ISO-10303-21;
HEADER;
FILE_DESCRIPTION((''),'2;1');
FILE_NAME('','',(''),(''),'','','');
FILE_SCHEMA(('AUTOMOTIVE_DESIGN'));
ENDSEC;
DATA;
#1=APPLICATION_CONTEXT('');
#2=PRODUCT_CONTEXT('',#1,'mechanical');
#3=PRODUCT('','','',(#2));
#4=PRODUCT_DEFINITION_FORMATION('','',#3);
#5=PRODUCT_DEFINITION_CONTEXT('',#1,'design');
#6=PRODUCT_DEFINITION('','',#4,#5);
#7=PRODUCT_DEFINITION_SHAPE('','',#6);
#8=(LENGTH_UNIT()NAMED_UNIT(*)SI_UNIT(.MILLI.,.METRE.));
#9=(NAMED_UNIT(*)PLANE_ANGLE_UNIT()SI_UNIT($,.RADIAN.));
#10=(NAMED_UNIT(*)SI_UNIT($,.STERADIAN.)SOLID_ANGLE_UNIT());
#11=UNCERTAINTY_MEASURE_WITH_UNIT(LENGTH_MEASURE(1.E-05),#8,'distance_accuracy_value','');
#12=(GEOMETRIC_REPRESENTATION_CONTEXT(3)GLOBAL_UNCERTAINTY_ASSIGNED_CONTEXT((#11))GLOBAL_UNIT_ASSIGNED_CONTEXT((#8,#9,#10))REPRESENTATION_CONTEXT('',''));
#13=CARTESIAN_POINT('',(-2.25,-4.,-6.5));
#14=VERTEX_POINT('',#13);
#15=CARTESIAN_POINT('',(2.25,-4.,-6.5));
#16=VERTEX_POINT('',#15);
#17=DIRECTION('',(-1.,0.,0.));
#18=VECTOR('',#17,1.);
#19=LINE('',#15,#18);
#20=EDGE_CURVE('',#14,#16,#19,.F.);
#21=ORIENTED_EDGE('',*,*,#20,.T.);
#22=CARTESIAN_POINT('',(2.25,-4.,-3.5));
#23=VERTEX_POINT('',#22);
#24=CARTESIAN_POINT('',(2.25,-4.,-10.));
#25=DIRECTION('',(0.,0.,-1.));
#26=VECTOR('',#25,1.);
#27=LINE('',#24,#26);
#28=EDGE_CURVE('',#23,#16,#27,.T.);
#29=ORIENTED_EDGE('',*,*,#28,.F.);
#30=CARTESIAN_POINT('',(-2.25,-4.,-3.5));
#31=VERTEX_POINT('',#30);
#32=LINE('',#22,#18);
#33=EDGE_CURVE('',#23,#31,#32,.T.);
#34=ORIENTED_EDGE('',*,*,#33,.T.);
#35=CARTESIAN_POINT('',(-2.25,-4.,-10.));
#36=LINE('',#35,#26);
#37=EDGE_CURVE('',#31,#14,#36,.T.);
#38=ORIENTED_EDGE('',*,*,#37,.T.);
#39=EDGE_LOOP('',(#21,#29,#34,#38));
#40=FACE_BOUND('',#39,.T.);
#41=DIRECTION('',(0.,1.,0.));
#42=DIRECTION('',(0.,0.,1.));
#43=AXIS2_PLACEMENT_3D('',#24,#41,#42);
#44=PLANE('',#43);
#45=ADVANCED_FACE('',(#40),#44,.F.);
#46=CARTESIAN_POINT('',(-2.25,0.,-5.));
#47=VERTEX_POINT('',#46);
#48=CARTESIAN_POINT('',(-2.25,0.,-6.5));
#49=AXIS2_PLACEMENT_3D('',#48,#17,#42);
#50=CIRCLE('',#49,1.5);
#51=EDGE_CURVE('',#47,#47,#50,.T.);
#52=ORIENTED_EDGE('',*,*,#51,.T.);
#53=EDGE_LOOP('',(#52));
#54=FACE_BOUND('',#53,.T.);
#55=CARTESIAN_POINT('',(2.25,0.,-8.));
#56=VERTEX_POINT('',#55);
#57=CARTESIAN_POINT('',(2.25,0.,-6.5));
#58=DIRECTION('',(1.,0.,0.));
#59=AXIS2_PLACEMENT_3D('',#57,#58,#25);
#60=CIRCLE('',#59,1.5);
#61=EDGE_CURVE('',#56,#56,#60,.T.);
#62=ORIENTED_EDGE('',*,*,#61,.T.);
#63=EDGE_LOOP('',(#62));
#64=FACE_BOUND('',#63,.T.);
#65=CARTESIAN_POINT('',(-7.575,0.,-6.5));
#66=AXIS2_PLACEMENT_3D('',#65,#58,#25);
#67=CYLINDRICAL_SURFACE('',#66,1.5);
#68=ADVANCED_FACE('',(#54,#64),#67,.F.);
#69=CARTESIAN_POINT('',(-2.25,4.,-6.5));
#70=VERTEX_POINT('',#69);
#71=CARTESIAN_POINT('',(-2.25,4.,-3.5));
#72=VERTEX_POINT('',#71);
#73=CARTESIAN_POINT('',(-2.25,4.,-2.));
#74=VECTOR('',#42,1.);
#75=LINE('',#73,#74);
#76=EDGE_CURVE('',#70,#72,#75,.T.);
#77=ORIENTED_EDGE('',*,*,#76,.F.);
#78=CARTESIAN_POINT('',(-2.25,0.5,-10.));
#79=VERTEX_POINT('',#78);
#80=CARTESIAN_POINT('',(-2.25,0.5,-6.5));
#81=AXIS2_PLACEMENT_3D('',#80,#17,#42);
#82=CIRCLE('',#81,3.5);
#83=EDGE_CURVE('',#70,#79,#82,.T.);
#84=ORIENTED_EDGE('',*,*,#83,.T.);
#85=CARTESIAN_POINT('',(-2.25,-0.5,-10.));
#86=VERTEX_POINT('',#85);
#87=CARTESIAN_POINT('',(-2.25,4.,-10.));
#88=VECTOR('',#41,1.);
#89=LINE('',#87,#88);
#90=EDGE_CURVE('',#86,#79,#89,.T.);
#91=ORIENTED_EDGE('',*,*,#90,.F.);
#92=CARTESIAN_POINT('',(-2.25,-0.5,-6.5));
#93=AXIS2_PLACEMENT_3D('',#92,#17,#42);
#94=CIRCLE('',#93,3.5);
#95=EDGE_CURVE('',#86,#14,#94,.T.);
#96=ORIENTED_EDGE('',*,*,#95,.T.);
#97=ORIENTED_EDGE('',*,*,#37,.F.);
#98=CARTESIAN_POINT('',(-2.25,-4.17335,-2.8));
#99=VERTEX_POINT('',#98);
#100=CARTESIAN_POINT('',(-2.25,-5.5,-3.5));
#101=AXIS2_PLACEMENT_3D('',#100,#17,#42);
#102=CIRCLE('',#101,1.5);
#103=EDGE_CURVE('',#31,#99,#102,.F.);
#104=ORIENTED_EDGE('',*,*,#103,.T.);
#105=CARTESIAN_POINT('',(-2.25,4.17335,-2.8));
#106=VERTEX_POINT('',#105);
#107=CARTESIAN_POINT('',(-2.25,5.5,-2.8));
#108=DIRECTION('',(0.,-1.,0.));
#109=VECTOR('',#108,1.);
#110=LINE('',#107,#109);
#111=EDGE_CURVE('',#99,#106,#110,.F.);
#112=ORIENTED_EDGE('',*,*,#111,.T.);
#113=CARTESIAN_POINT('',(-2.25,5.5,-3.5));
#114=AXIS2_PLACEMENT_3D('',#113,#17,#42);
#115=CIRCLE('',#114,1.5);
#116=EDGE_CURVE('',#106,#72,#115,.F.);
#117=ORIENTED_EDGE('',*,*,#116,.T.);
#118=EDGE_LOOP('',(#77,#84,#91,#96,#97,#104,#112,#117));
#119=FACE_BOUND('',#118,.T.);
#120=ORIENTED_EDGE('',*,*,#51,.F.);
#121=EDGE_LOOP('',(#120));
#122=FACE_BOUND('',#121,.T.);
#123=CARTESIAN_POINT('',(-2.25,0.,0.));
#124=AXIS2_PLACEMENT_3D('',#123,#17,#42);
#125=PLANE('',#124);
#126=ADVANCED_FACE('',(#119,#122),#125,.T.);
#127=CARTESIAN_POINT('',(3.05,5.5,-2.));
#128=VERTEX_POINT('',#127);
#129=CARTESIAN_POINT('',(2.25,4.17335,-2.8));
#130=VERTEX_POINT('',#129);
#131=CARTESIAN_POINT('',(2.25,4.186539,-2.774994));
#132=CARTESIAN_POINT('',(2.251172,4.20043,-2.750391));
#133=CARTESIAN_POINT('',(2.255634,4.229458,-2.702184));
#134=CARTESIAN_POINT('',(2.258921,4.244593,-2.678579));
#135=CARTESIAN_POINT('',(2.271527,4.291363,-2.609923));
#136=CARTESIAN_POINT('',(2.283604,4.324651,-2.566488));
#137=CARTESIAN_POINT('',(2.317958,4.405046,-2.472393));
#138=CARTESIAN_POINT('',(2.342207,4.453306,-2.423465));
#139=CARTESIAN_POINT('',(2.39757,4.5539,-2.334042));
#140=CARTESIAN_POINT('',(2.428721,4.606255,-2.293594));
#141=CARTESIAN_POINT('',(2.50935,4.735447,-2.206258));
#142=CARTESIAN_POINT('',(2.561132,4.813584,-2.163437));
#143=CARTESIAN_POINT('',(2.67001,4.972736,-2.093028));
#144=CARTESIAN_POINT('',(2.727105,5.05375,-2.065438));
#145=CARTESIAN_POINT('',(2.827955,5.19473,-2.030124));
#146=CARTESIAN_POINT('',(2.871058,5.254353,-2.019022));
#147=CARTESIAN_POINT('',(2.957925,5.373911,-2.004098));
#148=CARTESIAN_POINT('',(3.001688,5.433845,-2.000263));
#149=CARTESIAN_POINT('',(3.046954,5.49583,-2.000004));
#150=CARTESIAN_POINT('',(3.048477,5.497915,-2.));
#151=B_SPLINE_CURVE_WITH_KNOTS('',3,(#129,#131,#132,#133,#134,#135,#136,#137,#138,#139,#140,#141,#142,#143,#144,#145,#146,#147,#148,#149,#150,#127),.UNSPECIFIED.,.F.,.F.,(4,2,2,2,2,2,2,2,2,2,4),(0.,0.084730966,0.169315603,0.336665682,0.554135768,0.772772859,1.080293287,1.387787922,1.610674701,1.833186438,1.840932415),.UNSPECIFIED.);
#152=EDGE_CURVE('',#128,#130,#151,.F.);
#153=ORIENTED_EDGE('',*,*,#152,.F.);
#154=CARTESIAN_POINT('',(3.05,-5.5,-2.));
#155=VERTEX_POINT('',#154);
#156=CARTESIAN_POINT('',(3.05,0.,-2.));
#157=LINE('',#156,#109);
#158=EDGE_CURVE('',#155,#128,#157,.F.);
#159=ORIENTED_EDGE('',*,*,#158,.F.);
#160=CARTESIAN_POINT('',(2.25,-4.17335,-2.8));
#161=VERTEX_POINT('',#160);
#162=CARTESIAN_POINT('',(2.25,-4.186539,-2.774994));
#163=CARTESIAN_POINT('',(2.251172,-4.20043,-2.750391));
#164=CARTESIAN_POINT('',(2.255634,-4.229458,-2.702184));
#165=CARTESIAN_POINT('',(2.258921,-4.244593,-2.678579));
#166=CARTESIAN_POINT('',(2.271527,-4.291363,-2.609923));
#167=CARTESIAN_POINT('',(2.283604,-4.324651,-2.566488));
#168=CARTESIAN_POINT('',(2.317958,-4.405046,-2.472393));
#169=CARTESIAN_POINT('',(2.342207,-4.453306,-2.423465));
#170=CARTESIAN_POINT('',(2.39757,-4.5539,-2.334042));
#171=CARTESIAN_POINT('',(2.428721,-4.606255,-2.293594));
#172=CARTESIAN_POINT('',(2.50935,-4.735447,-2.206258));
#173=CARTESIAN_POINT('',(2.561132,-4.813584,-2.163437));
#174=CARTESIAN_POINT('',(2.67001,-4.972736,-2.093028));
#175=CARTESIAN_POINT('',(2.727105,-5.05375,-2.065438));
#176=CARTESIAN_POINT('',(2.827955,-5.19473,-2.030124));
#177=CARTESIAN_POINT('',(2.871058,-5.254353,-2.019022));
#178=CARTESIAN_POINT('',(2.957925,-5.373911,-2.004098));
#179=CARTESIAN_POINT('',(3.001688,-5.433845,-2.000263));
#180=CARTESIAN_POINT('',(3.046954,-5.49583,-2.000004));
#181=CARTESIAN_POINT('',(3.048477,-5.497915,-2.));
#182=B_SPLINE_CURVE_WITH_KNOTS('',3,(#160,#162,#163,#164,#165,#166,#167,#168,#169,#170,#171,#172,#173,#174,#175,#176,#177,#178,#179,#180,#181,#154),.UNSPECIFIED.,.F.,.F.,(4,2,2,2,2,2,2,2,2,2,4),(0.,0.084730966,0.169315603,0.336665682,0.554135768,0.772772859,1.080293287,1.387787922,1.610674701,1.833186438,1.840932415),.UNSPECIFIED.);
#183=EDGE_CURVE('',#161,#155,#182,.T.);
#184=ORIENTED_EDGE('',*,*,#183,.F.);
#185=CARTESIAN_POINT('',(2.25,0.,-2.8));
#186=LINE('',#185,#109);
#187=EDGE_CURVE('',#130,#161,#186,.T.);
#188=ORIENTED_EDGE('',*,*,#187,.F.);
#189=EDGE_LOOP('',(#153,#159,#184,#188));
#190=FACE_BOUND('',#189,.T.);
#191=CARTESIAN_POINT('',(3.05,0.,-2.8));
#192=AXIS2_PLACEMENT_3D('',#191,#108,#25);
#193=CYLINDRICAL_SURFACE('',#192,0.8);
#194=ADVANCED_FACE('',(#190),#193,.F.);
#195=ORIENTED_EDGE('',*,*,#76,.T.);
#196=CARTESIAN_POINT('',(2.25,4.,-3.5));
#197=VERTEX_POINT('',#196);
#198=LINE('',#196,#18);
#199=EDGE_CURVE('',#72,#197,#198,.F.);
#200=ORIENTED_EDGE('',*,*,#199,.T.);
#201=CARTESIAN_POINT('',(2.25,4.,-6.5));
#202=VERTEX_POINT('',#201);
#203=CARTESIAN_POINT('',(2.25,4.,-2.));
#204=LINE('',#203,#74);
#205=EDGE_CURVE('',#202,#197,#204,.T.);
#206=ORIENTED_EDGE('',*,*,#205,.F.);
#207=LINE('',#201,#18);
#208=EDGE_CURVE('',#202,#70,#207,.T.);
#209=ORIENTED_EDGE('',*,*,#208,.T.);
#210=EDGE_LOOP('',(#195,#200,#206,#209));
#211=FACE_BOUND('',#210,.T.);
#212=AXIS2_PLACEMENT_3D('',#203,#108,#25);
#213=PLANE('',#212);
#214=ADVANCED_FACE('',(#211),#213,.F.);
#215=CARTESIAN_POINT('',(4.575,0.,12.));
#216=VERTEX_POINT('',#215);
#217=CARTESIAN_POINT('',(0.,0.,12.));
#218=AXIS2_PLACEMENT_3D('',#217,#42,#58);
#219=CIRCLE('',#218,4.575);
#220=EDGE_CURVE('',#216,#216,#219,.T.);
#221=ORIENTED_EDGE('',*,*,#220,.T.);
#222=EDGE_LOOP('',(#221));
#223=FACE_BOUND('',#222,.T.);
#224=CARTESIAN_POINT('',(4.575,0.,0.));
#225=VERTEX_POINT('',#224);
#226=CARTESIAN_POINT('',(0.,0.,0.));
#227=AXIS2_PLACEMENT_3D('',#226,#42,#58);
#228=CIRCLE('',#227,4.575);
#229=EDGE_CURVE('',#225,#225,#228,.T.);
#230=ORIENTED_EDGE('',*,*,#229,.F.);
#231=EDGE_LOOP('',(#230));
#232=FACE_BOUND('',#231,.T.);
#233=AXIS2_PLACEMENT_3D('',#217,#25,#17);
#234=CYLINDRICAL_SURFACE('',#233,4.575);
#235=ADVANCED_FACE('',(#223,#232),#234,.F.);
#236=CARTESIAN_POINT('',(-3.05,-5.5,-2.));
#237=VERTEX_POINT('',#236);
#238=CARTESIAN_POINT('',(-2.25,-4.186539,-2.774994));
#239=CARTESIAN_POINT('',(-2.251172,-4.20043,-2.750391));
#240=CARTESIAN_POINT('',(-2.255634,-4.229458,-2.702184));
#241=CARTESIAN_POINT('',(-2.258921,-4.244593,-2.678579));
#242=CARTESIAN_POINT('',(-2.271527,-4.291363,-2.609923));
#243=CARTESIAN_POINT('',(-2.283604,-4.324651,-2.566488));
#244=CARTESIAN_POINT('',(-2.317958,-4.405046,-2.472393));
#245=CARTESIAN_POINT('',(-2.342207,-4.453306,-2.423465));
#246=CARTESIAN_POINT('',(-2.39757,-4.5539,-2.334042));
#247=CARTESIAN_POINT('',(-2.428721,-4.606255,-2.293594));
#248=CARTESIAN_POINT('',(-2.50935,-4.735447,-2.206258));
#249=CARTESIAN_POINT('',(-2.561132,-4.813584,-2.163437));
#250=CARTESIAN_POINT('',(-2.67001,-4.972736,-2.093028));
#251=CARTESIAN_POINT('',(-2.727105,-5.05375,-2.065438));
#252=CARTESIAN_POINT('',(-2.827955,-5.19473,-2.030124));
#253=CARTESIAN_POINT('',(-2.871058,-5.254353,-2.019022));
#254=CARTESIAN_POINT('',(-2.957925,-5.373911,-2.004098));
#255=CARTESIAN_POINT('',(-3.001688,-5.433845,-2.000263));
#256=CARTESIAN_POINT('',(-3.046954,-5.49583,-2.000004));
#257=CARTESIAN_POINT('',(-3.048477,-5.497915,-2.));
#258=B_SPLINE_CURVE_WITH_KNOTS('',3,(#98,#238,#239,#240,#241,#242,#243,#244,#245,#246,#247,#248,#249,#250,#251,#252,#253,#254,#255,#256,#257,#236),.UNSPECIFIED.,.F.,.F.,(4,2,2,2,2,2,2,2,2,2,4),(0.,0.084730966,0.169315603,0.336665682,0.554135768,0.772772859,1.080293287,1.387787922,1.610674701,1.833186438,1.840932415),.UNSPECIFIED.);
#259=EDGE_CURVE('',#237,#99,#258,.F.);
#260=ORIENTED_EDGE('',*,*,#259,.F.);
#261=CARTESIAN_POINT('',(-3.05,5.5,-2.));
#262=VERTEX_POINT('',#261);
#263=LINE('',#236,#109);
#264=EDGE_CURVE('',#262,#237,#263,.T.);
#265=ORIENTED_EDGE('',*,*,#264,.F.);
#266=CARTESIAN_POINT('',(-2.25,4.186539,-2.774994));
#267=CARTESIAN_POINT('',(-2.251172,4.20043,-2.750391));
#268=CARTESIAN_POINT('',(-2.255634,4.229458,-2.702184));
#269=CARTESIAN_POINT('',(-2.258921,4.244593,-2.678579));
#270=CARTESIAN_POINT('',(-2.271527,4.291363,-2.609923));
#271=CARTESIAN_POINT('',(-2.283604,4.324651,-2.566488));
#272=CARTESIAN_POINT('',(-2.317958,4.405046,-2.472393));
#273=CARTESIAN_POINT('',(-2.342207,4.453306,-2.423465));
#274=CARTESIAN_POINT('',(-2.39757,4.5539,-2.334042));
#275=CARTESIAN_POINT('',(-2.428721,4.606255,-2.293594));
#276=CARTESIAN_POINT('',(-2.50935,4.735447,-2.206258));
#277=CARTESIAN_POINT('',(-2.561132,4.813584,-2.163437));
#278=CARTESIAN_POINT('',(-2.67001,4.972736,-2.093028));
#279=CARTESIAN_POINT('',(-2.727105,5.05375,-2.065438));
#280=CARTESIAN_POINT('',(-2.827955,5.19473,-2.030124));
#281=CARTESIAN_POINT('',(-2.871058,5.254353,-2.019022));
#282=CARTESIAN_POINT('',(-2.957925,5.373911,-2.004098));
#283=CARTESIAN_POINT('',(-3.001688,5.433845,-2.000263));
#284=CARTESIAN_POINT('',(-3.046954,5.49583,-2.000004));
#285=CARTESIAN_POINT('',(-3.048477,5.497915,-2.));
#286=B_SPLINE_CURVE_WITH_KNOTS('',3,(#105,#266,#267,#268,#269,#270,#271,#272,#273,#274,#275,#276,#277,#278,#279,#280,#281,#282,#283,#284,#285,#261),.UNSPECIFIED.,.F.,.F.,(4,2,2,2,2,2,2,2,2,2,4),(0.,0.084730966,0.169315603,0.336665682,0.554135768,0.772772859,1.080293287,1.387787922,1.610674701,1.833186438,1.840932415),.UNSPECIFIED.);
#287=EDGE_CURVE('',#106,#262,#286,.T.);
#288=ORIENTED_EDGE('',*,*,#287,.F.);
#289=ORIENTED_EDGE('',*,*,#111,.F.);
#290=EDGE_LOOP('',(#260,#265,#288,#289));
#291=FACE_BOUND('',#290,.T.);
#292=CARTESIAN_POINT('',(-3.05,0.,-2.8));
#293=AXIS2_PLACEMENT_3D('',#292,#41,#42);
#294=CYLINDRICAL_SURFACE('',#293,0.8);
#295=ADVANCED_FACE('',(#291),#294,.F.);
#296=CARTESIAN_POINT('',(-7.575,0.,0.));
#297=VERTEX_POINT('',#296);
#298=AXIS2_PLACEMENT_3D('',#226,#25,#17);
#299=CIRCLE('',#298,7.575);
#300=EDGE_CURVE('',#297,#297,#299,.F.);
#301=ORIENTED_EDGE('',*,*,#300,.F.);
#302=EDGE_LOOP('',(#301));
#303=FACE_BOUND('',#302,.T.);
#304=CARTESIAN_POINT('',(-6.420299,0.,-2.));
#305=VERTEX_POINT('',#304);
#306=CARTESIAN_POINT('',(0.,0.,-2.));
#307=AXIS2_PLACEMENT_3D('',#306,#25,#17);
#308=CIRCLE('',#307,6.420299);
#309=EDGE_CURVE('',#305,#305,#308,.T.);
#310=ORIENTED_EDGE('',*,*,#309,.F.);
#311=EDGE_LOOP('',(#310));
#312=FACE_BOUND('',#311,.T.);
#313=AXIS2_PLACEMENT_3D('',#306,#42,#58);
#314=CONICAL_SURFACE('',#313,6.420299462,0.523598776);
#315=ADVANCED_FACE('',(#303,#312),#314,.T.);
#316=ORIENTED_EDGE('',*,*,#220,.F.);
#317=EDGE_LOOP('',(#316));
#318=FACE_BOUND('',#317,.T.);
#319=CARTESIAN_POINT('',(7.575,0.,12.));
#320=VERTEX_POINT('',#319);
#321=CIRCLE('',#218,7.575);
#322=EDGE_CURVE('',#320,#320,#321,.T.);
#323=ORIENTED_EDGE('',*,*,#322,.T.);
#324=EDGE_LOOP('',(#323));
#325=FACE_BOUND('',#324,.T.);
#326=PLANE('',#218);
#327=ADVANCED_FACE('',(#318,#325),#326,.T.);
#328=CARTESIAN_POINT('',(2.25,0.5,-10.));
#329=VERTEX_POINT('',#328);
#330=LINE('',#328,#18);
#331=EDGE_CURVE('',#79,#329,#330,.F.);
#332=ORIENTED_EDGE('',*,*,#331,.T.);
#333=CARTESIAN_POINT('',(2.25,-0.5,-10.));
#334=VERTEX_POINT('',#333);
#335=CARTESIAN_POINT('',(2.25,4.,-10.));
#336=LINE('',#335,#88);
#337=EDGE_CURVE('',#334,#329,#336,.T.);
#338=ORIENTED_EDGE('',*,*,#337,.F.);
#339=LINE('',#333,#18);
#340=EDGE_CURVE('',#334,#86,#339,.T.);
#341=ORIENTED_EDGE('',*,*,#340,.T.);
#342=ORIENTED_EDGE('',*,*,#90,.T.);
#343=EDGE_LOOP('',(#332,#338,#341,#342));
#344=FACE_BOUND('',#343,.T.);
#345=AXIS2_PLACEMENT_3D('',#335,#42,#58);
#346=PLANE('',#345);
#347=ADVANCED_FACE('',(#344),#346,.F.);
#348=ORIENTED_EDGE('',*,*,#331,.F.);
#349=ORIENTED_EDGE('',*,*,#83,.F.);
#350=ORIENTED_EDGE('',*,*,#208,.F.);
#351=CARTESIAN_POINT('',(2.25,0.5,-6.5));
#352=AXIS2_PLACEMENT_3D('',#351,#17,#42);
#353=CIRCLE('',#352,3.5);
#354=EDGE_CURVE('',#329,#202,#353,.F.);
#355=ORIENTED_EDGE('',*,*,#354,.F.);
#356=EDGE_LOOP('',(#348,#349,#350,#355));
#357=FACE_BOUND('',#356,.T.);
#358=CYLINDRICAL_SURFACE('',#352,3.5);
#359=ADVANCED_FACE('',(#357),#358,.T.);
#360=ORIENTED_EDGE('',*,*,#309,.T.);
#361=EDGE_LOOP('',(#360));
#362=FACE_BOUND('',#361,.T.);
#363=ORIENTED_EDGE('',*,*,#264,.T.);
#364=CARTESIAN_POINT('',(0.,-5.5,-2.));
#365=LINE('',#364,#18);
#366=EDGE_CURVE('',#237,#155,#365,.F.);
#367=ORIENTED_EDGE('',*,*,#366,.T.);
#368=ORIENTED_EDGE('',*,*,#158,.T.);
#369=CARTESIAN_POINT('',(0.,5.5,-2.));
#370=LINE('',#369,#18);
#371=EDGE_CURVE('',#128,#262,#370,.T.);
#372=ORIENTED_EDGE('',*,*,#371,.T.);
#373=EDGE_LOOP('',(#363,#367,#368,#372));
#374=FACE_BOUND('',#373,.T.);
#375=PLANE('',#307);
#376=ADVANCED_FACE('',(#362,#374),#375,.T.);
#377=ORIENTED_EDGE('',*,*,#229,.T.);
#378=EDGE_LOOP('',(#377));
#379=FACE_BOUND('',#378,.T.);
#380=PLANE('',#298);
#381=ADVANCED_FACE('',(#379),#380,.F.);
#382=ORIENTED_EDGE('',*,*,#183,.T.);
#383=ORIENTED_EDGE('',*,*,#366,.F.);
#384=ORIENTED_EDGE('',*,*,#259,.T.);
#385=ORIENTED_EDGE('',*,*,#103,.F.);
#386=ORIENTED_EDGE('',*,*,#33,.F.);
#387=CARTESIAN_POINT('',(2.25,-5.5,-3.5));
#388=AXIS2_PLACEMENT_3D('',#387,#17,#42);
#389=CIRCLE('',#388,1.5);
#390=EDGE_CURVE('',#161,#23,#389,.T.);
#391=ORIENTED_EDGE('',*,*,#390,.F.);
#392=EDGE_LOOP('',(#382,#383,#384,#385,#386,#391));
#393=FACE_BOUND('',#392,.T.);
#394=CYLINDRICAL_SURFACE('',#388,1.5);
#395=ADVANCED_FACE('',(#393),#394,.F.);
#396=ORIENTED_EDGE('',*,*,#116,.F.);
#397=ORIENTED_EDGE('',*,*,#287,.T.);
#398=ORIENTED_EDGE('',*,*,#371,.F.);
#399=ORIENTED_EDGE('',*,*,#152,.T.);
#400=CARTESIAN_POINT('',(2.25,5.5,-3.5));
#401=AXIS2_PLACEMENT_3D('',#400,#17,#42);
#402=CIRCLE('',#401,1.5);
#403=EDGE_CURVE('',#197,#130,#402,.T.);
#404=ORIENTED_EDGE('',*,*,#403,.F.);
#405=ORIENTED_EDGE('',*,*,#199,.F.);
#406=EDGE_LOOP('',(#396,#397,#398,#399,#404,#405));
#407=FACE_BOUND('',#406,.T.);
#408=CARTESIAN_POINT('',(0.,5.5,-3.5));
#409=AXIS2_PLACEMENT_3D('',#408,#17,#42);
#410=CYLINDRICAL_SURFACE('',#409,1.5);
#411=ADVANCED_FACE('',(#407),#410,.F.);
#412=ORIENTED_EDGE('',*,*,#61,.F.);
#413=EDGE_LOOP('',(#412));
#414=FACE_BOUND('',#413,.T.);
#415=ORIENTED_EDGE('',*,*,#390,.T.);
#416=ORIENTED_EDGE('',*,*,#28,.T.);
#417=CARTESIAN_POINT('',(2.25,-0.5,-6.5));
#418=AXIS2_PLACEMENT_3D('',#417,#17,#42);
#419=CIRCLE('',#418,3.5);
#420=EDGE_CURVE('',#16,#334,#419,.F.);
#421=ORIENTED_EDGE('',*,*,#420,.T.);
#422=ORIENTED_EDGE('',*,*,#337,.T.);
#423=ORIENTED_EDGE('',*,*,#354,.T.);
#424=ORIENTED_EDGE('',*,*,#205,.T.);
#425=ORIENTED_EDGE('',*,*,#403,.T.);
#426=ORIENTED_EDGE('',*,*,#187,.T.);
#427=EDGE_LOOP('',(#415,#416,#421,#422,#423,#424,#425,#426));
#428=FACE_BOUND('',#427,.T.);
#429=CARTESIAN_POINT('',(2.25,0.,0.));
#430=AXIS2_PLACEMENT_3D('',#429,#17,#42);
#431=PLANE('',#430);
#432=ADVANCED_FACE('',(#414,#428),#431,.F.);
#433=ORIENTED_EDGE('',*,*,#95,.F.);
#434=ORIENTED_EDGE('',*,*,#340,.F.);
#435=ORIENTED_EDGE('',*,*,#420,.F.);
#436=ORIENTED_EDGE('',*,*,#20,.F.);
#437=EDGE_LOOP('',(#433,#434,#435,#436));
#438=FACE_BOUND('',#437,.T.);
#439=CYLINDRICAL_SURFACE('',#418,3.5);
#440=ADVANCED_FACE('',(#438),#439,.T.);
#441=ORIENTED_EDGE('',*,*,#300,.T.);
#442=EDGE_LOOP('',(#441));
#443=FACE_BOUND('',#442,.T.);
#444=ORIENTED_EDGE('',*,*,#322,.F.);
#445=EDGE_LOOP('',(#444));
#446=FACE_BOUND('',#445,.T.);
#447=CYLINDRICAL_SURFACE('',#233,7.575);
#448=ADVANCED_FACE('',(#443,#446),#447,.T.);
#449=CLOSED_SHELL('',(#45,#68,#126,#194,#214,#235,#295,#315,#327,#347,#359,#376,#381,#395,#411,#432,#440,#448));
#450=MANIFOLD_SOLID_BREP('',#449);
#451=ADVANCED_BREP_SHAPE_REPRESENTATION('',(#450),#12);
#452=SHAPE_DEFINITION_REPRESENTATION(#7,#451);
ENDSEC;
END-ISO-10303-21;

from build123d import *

# Parameters (mm, degrees)
SKETCH1_R           = 7.575
SKETCH1_R_2         = 4.575
BOSS_EXTRUDE1_DEPTH = 12
BOSS_EXTRUDE2_START = 2
SKETCH2_R           = 7.575
BOSS_EXTRUDE2_DEPTH = 2
SKETCH4_W           = 8
SKETCH4_H           = 8
BOSS_EXTRUDE3_DEPTH = 2.25
SKETCH5_R           = 1.5
CUT_EXTRUDE1_DEPTH  = 18.260105735
FILLET1_R           = 3.5
FILLET2_R           = 1.5
FILLET3_R           = 0.8
CHAMFER1_SIZE2      = 2
CHAMFER1_SIZE       = 1.154700538


with BuildPart() as part:
    # Sketch1 → Boss-Extrude1 (new body)
    with BuildSketch(Plane.XY):
        Circle(SKETCH1_R)
        Circle(SKETCH1_R_2, mode=Mode.SUBTRACT)
    extrude(amount=BOSS_EXTRUDE1_DEPTH)

    # Sketch2 → Boss-Extrude2 (add)
    with BuildSketch(Plane(origin=(0, 0, 0), x_dir=(-1, 0, 0), z_dir=(0, 0, -1)).offset(BOSS_EXTRUDE2_START)):
        Circle(SKETCH2_R)
    extrude(amount=-BOSS_EXTRUDE2_DEPTH)

    # Sketch4 → Boss-Extrude3 (add, symmetric)
    with BuildSketch(Plane(origin=(0, 0, 0), x_dir=(0, 0, -1), z_dir=(1, 0, 0))):
        with Locations((6, 0)):
            Rectangle(SKETCH4_W, SKETCH4_H)
    extrude(amount=BOSS_EXTRUDE3_DEPTH, both=True)

    # Sketch5 → Cut-Extrude1 (cut, through all)
    with BuildSketch(Plane(origin=(2.25, 0, 0), x_dir=(0, 0, -1), z_dir=(1, 0, 0))):
        with Locations((6.5, 0)):
            Circle(SKETCH5_R)
    extrude(amount=-CUT_EXTRUDE1_DEPTH, mode=Mode.SUBTRACT)

    # Fillet1
    fillet1_edges = [part.edges().sort_by_distance(p)[0] for p in [
        (0, -4, -10),
        (0, 4, -10),
    ]]
    fillet(fillet1_edges, radius=FILLET1_R)

    # Fillet2
    fillet2_edges = [part.edges().sort_by_distance(p)[0] for p in [
        (0, 4, -2),
        (0, -4, -2),
    ]]
    fillet(fillet2_edges, radius=FILLET2_R)

    # Fillet3
    fillet3_edges = [part.edges().sort_by_distance(p)[0] for p in [
        (-2.25, 0, -2),
        (2.25, 0, -2),
    ]]
    fillet(fillet3_edges, radius=FILLET3_R)

    # Chamfer1
    chamfer1_edges = [part.edges().sort_by_distance(p)[0] for p in [
        (7.575, 0, -2),
    ]]
    chamfer1_side = [part.faces().sort_by_distance(p)[0] for p in [
        (7.551905989, 0, -2),
    ]]
    chamfer(chamfer1_edges, length=CHAMFER1_SIZE - 0.0001, length2=CHAMFER1_SIZE2 - 0.0001, reference=chamfer1_side[0])  # a hair under: the kernel refuses the full size


solid = part.part
